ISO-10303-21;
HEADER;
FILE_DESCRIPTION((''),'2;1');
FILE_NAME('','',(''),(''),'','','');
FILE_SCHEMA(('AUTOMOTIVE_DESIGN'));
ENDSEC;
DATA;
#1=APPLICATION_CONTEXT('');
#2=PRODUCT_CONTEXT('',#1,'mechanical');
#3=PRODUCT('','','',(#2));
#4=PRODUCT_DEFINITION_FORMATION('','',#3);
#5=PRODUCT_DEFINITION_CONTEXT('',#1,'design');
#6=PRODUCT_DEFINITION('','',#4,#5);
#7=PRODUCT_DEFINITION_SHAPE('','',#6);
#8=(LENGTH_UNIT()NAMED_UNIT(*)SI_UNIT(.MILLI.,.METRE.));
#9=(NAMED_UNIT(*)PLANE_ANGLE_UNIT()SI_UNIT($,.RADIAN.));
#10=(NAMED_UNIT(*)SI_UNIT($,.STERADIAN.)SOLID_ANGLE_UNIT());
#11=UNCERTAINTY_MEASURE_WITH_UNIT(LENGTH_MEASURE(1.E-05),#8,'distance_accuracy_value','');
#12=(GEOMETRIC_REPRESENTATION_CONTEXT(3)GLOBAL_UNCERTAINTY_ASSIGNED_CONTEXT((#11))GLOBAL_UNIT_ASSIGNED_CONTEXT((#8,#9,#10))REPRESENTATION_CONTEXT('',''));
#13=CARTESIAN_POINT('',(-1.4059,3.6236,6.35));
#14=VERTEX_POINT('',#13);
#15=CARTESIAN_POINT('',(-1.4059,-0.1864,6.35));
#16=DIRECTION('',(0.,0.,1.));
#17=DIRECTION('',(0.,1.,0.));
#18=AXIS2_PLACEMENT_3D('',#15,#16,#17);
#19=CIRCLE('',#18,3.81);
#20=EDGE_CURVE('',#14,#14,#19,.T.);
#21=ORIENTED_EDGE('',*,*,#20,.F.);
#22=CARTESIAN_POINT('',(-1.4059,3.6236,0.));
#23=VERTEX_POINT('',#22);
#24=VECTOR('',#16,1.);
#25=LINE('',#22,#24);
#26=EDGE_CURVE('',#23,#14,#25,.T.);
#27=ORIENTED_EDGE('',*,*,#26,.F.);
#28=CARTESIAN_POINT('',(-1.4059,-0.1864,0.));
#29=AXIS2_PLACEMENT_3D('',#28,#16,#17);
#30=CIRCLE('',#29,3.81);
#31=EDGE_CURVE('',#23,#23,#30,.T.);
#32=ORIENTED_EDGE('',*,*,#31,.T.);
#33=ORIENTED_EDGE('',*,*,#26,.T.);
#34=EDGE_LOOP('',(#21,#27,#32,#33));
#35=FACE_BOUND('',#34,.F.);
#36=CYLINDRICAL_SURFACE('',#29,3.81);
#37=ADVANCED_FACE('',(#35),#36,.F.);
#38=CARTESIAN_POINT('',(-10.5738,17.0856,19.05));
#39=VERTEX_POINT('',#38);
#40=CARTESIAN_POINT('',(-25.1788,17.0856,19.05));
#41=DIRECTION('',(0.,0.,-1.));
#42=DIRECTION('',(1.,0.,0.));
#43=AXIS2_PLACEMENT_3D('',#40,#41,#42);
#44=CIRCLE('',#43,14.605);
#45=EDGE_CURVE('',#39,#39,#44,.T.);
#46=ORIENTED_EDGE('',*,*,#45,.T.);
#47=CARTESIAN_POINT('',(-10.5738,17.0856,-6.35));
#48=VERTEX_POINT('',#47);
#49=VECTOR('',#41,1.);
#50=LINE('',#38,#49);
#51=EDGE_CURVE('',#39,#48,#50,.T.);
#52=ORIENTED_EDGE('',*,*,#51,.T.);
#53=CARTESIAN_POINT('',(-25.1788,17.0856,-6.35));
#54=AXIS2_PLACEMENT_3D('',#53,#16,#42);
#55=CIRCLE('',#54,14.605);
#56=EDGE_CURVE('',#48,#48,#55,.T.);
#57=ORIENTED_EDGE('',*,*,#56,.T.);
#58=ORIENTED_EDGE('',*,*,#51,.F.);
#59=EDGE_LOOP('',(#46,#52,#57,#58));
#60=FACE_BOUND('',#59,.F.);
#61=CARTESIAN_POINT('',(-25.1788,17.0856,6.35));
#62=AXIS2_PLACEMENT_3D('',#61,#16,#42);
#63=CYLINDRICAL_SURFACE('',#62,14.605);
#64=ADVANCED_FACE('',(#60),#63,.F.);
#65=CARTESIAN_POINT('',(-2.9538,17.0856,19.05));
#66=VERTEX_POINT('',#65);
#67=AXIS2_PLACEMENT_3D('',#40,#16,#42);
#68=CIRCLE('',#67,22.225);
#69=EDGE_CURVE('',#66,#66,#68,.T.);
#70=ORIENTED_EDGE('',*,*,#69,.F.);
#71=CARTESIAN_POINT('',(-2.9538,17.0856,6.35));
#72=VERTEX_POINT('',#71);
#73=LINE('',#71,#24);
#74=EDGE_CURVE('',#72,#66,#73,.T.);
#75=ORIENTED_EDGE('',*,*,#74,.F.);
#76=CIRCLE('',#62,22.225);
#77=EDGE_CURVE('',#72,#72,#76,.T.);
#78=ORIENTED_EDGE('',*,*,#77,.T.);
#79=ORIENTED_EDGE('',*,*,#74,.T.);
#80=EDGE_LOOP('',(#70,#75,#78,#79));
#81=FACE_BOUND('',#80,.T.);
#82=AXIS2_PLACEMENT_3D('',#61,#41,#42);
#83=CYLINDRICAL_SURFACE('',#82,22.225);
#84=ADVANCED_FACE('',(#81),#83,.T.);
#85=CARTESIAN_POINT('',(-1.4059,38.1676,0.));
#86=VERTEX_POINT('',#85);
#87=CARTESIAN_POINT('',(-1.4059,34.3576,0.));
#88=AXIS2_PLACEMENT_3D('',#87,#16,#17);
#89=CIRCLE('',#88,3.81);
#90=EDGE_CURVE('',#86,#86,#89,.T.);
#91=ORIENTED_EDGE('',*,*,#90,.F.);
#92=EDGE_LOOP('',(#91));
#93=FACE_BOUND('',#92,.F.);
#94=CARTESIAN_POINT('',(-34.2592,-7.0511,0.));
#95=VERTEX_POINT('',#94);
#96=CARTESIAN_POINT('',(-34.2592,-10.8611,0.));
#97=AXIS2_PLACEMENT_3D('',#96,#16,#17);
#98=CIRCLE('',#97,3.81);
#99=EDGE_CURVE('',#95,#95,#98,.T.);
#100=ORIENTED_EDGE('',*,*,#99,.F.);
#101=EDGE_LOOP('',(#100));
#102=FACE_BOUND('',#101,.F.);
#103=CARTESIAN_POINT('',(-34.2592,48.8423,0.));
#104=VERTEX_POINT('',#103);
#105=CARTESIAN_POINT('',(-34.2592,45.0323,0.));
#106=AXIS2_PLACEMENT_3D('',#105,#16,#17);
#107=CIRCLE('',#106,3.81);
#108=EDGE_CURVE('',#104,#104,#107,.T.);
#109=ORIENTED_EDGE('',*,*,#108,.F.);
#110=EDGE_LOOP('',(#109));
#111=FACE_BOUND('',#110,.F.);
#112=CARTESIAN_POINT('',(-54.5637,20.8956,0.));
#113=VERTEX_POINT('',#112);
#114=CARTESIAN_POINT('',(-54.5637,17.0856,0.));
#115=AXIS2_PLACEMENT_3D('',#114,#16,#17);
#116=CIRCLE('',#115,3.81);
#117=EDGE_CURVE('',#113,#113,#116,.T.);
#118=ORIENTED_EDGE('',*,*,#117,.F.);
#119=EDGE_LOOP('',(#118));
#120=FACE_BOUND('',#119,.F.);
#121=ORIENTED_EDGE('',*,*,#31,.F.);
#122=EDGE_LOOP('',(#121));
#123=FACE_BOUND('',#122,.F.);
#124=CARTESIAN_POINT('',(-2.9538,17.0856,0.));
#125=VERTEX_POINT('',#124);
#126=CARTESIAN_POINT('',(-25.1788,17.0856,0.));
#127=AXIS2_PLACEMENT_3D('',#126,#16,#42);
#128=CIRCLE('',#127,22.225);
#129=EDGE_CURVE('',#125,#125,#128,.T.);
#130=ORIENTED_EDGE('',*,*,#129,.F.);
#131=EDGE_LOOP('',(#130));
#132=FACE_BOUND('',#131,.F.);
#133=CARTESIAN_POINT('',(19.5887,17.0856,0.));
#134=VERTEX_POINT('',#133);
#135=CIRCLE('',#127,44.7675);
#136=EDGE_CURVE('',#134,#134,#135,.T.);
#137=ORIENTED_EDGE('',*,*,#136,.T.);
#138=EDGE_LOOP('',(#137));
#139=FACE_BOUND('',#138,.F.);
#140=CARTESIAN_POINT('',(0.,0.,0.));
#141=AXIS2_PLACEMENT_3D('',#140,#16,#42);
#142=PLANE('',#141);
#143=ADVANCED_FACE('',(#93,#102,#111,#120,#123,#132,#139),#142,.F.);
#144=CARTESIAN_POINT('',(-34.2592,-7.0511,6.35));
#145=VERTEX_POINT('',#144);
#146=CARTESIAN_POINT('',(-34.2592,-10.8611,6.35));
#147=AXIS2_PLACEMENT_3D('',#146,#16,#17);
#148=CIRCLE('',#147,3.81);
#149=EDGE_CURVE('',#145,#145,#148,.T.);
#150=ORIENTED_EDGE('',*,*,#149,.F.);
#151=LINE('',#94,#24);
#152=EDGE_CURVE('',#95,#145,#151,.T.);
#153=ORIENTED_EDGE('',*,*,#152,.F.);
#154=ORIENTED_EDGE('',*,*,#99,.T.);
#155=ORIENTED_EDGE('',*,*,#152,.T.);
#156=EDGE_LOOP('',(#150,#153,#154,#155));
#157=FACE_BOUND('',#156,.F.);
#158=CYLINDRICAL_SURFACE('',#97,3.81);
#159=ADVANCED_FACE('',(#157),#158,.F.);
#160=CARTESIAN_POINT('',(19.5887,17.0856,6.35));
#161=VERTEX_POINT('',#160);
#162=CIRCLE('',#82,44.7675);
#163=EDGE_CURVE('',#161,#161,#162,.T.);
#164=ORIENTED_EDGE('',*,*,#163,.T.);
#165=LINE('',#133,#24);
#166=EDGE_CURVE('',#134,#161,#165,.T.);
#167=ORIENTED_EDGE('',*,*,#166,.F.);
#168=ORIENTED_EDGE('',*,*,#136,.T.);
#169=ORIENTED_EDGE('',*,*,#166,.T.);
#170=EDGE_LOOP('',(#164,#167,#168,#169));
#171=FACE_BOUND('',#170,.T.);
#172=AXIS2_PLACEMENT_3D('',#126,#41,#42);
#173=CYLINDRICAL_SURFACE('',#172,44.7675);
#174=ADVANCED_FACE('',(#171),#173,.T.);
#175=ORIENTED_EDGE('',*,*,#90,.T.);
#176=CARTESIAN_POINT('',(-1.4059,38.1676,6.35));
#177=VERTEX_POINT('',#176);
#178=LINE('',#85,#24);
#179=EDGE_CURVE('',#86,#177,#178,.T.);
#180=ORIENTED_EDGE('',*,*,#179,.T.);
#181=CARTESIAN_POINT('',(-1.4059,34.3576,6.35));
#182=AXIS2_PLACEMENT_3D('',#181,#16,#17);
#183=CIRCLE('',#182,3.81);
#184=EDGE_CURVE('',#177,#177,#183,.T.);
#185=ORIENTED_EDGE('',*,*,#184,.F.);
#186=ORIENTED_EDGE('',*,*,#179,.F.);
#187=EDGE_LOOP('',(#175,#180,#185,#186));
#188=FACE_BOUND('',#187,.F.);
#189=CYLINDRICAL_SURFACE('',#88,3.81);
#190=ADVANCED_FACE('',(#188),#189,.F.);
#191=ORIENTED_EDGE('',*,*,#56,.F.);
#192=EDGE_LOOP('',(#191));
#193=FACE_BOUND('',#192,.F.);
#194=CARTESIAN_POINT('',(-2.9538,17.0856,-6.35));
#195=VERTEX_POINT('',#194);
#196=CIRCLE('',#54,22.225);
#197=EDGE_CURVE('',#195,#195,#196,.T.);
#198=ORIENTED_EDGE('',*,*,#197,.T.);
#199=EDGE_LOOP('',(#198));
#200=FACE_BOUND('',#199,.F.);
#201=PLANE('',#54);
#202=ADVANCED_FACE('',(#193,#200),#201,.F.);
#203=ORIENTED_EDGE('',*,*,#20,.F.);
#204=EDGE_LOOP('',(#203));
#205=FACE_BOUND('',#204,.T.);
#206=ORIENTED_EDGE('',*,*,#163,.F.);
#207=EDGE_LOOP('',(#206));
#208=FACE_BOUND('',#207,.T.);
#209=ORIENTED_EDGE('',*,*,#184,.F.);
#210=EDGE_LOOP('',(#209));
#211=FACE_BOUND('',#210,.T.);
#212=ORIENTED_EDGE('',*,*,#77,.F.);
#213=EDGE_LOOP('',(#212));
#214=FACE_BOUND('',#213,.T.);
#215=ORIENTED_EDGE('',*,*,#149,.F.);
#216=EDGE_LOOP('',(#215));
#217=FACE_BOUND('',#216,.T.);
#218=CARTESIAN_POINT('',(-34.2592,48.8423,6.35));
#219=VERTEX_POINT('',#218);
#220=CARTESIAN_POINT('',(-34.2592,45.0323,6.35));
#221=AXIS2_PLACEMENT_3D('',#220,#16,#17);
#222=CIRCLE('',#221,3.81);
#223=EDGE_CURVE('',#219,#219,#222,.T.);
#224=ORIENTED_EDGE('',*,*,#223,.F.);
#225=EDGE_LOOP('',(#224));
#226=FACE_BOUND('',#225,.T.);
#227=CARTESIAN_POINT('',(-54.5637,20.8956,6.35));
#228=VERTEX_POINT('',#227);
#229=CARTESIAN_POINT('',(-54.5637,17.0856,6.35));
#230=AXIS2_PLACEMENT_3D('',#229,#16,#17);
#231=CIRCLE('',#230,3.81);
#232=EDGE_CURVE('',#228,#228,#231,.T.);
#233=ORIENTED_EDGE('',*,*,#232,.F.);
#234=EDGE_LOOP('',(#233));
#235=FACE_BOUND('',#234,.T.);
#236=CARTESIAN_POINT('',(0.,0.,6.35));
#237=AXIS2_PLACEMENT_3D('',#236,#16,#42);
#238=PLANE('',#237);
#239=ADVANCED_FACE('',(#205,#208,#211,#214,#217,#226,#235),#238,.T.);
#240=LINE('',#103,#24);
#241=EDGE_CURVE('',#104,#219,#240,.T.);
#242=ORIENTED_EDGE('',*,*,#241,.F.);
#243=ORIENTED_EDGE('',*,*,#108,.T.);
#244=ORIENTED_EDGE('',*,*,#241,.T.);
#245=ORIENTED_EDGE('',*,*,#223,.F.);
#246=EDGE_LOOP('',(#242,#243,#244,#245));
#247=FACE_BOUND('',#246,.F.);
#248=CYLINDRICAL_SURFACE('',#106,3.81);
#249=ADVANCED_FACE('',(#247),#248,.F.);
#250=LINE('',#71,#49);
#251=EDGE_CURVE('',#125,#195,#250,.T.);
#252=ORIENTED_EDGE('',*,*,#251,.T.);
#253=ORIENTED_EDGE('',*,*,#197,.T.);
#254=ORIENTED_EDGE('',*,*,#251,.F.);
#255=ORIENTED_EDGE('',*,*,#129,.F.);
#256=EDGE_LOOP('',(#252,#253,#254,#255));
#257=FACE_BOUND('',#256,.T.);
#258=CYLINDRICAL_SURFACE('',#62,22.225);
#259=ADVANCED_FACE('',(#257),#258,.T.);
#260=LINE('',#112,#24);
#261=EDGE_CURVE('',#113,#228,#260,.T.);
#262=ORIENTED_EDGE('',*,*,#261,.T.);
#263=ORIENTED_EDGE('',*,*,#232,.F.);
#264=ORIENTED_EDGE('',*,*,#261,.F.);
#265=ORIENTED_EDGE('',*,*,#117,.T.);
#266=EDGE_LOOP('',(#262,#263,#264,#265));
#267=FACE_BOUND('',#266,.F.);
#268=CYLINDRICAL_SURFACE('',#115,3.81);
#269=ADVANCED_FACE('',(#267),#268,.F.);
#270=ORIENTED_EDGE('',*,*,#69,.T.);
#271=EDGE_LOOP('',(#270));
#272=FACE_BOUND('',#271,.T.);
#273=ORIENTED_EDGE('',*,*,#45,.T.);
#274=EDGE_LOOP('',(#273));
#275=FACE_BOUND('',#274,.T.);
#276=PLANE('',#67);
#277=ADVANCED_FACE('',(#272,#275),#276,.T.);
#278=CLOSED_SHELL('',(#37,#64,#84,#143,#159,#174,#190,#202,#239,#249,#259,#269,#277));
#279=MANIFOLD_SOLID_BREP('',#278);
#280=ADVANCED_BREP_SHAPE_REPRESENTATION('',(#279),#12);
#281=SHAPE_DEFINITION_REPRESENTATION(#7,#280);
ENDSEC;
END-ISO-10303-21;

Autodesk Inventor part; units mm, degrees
ref_plane "YZ Plane" through (0, 0, 0) normal (1, 0, 0) x (0, 1, 0)
ref_plane "XZ Plane" through (0, 0, 0) normal (0, 1, 0) x (-1, 0, 0)
ref_plane "XY Plane" through (0, 0, 0) normal (0, 0, 1) x (1, 0, 0)
sketch "Sketch1" plane through (0, 0, 0) normal (0, 0, 1) x (1, 0, 0)
  line L0 (-25.1788, 61.8531) -> (-25.1788, 68.2031)
  line L1 (-13.5921, 60.3277) -> (-11.9486, 66.4613)
  line L2 (-2.7951, 55.8554) -> (0.3799, 61.3547)
  line L3 (6.4766, 48.741) -> (10.9667, 53.2312)
  line L4 (13.591, 39.4694) -> (19.0902, 42.6444)
  line L5 (18.0633, 28.6723) -> (24.1969, 30.3158)
  line L6 (19.5887, 17.0856) -> (25.9387, 17.0856)
  line L7 (18.0633, 5.4989) -> (24.1969, 3.8554)
  line L8 (13.591, -5.2981) -> (19.0902, -8.4731)
  line L9 (6.4766, -14.5698) -> (10.9667, -19.0599)
  line L10 (-2.7951, -21.6842) -> (0.3799, -27.1834)
  line L11 (-13.5921, -26.1565) -> (-11.9486, -32.2901)
  line L12 (-25.1788, -27.6819) -> (-25.1788, -34.0319)
  line L13 (-36.7655, -26.1565) -> (-38.409, -32.2901)
  line L14 (-47.5626, -21.6842) -> (-50.7376, -27.1834)
  line L15 (-56.8342, -14.5698) -> (-61.3243, -19.0599)
  line L16 (-63.9486, -5.2981) -> (-69.4479, -8.4731)
  line L17 (-68.4209, 5.4989) -> (-74.5545, 3.8554)
  line L18 (-69.9463, 17.0856) -> (-76.2963, 17.0856)
  line L19 (-68.4209, 28.6723) -> (-74.5545, 30.3158)
  line L20 (-63.9486, 39.4694) -> (-69.4479, 42.6444)
  line L21 (-56.8342, 48.741) -> (-61.3243, 53.2312)
  line L22 (-47.5626, 55.8554) -> (-50.7376, 61.3547)
  line L23 (-36.7655, 60.3277) -> (-38.409, 66.4613)
  arc A0 (-38.409, 66.4613) -> (-25.1788, 68.2031) centre (-31.8994, 68.1336) ccw
  arc A1 (-25.1788, 68.2031) -> (-11.9486, 66.4613) centre (-18.4582, 68.1336) ccw
  arc A2 (-11.9486, 66.4613) -> (0.3799, 61.3547) centre (-5.475, 64.6547) ccw
  arc A3 (0.3799, 61.3547) -> (10.9667, 53.2312) centre (6.1654, 57.9342) ccw
  arc A4 (10.9667, 53.2312) -> (19.0902, 42.6444) centre (15.6697, 48.4298) ccw
  arc A5 (19.0902, 42.6444) -> (24.1969, 30.3158) centre (22.3903, 36.7894) ccw
  arc A6 (24.1969, 30.3158) -> (25.9387, 17.0856) centre (25.8692, 23.8062) ccw
  arc A7 (25.9387, 17.0856) -> (24.1969, 3.8554) centre (25.8692, 10.365) ccw
  arc A8 (24.1969, 3.8554) -> (19.0902, -8.4731) centre (22.3903, -2.6182) ccw
  arc A9 (19.0902, -8.4731) -> (10.9667, -19.0599) centre (15.6697, -14.2586) ccw
  arc A10 (10.9667, -19.0599) -> (0.3799, -27.1834) centre (6.1654, -23.7629) ccw
  arc A11 (0.3799, -27.1834) -> (-11.9486, -32.2901) centre (-5.475, -30.4835) ccw
  arc A12 (-11.9486, -32.2901) -> (-25.1788, -34.0319) centre (-18.4582, -33.9623) ccw
  arc A13 (-25.1788, -34.0319) -> (-38.409, -32.2901) centre (-31.8994, -33.9623) ccw
  arc A14 (-38.409, -32.2901) -> (-50.7376, -27.1834) centre (-44.8826, -30.4835) ccw
  arc A15 (-50.7376, -27.1834) -> (-61.3243, -19.0599) centre (-56.523, -23.7629) ccw
  arc A16 (-61.3243, -19.0599) -> (-69.4479, -8.4731) centre (-66.0273, -14.2586) ccw
  arc A17 (-69.4479, -8.4731) -> (-74.5545, 3.8554) centre (-72.7479, -2.6182) ccw
  arc A18 (-74.5545, 3.8554) -> (-76.2963, 17.0856) centre (-76.2268, 10.365) ccw
  arc A19 (-76.2963, 17.0856) -> (-74.5545, 30.3158) centre (-76.2268, 23.8062) ccw
  arc A20 (-74.5545, 30.3158) -> (-69.4479, 42.6444) centre (-72.7479, 36.7894) ccw
  arc A21 (-69.4479, 42.6444) -> (-61.3243, 53.2312) centre (-66.0273, 48.4298) ccw
  arc A22 (-61.3243, 53.2312) -> (-50.7376, 61.3547) centre (-56.523, 57.9342) ccw
  arc A23 (-50.7376, 61.3547) -> (-38.409, 66.4613) centre (-44.8826, 64.6547) ccw
  circle A24 centre (-25.1788, 17.0856) radius 44.7675
  point P0 (0, 0)
  dimension "d36" = 89.535
  dimension "d8" = 360
extrude "Extrusion1" add sketch "Sketch1" along normal blind 6.35 contours A24
sketch "Sketch2" plane through (-25.1788, 17.0856, 0) normal (0, 0, -1) x (-1, 0, 0)
  circle A0 centre (-23.7729, 17.272) radius 3.81
  circle A1 centre (0, 0) radius 44.7675 projected
  circle A2 centre (9.0804, 27.9467) radius 3.81
  circle A3 centre (29.3849, 0) radius 3.81
  circle A4 centre (9.0804, -27.9467) radius 3.81
  circle A5 centre (-23.7729, -17.272) radius 3.81
  point P0 (-25.1788, -17.0856)
  dimension "d15" = 360
  dimension "d17" = 17.272
  dimension "d19" = 0
  dimension "d20" = 7.62
hole "Hole1" at (-1.4059, 34.3576, 0) at (-1.4059, -0.1864, 0) at (-34.2592, 45.0323, 0) at (-34.2592, -10.8611, 0) at (-54.5637, 17.0856, 0) direction (0, 0, 1) diameter 7.62 end through all
sketch "Sketch3" plane through (-25.1788, 17.0856, 0) normal (0, 0, -1) x (-1, 0, 0)
  point P0 (-25.1788, -17.0856)
sketch "Sketch4" plane through (-25.1788, 17.0856, 0) normal (0, 0, -1) x (-1, 0, 0)
  point P0 (-25.1788, -17.0856)
sketch "Sketch6" plane through (-25.1788, 17.0856, 6.35) normal (0, 0, 1) x (1, 0, 0)
  circle A0 centre (0, 0) radius 14.605
  point P0 (25.1788, -17.0856)
  dimension "d48" = 29.21
sketch "Sketch7" plane through (-25.1788, 17.0856, 6.35) normal (0, 0, 1) x (1, 0, 0)
  circle A0 centre (0, 0) radius 22.225
  point P0 (25.1788, -17.0856)
  dimension "d51" = 44.45
extrude "Extrusion4" add sketch "Sketch7" along normal mid plane 25.4
extrude "Extrusion5" cut sketch "Sketch6" along normal through all both and the other way through all
properties part number "PVC motor gear"
